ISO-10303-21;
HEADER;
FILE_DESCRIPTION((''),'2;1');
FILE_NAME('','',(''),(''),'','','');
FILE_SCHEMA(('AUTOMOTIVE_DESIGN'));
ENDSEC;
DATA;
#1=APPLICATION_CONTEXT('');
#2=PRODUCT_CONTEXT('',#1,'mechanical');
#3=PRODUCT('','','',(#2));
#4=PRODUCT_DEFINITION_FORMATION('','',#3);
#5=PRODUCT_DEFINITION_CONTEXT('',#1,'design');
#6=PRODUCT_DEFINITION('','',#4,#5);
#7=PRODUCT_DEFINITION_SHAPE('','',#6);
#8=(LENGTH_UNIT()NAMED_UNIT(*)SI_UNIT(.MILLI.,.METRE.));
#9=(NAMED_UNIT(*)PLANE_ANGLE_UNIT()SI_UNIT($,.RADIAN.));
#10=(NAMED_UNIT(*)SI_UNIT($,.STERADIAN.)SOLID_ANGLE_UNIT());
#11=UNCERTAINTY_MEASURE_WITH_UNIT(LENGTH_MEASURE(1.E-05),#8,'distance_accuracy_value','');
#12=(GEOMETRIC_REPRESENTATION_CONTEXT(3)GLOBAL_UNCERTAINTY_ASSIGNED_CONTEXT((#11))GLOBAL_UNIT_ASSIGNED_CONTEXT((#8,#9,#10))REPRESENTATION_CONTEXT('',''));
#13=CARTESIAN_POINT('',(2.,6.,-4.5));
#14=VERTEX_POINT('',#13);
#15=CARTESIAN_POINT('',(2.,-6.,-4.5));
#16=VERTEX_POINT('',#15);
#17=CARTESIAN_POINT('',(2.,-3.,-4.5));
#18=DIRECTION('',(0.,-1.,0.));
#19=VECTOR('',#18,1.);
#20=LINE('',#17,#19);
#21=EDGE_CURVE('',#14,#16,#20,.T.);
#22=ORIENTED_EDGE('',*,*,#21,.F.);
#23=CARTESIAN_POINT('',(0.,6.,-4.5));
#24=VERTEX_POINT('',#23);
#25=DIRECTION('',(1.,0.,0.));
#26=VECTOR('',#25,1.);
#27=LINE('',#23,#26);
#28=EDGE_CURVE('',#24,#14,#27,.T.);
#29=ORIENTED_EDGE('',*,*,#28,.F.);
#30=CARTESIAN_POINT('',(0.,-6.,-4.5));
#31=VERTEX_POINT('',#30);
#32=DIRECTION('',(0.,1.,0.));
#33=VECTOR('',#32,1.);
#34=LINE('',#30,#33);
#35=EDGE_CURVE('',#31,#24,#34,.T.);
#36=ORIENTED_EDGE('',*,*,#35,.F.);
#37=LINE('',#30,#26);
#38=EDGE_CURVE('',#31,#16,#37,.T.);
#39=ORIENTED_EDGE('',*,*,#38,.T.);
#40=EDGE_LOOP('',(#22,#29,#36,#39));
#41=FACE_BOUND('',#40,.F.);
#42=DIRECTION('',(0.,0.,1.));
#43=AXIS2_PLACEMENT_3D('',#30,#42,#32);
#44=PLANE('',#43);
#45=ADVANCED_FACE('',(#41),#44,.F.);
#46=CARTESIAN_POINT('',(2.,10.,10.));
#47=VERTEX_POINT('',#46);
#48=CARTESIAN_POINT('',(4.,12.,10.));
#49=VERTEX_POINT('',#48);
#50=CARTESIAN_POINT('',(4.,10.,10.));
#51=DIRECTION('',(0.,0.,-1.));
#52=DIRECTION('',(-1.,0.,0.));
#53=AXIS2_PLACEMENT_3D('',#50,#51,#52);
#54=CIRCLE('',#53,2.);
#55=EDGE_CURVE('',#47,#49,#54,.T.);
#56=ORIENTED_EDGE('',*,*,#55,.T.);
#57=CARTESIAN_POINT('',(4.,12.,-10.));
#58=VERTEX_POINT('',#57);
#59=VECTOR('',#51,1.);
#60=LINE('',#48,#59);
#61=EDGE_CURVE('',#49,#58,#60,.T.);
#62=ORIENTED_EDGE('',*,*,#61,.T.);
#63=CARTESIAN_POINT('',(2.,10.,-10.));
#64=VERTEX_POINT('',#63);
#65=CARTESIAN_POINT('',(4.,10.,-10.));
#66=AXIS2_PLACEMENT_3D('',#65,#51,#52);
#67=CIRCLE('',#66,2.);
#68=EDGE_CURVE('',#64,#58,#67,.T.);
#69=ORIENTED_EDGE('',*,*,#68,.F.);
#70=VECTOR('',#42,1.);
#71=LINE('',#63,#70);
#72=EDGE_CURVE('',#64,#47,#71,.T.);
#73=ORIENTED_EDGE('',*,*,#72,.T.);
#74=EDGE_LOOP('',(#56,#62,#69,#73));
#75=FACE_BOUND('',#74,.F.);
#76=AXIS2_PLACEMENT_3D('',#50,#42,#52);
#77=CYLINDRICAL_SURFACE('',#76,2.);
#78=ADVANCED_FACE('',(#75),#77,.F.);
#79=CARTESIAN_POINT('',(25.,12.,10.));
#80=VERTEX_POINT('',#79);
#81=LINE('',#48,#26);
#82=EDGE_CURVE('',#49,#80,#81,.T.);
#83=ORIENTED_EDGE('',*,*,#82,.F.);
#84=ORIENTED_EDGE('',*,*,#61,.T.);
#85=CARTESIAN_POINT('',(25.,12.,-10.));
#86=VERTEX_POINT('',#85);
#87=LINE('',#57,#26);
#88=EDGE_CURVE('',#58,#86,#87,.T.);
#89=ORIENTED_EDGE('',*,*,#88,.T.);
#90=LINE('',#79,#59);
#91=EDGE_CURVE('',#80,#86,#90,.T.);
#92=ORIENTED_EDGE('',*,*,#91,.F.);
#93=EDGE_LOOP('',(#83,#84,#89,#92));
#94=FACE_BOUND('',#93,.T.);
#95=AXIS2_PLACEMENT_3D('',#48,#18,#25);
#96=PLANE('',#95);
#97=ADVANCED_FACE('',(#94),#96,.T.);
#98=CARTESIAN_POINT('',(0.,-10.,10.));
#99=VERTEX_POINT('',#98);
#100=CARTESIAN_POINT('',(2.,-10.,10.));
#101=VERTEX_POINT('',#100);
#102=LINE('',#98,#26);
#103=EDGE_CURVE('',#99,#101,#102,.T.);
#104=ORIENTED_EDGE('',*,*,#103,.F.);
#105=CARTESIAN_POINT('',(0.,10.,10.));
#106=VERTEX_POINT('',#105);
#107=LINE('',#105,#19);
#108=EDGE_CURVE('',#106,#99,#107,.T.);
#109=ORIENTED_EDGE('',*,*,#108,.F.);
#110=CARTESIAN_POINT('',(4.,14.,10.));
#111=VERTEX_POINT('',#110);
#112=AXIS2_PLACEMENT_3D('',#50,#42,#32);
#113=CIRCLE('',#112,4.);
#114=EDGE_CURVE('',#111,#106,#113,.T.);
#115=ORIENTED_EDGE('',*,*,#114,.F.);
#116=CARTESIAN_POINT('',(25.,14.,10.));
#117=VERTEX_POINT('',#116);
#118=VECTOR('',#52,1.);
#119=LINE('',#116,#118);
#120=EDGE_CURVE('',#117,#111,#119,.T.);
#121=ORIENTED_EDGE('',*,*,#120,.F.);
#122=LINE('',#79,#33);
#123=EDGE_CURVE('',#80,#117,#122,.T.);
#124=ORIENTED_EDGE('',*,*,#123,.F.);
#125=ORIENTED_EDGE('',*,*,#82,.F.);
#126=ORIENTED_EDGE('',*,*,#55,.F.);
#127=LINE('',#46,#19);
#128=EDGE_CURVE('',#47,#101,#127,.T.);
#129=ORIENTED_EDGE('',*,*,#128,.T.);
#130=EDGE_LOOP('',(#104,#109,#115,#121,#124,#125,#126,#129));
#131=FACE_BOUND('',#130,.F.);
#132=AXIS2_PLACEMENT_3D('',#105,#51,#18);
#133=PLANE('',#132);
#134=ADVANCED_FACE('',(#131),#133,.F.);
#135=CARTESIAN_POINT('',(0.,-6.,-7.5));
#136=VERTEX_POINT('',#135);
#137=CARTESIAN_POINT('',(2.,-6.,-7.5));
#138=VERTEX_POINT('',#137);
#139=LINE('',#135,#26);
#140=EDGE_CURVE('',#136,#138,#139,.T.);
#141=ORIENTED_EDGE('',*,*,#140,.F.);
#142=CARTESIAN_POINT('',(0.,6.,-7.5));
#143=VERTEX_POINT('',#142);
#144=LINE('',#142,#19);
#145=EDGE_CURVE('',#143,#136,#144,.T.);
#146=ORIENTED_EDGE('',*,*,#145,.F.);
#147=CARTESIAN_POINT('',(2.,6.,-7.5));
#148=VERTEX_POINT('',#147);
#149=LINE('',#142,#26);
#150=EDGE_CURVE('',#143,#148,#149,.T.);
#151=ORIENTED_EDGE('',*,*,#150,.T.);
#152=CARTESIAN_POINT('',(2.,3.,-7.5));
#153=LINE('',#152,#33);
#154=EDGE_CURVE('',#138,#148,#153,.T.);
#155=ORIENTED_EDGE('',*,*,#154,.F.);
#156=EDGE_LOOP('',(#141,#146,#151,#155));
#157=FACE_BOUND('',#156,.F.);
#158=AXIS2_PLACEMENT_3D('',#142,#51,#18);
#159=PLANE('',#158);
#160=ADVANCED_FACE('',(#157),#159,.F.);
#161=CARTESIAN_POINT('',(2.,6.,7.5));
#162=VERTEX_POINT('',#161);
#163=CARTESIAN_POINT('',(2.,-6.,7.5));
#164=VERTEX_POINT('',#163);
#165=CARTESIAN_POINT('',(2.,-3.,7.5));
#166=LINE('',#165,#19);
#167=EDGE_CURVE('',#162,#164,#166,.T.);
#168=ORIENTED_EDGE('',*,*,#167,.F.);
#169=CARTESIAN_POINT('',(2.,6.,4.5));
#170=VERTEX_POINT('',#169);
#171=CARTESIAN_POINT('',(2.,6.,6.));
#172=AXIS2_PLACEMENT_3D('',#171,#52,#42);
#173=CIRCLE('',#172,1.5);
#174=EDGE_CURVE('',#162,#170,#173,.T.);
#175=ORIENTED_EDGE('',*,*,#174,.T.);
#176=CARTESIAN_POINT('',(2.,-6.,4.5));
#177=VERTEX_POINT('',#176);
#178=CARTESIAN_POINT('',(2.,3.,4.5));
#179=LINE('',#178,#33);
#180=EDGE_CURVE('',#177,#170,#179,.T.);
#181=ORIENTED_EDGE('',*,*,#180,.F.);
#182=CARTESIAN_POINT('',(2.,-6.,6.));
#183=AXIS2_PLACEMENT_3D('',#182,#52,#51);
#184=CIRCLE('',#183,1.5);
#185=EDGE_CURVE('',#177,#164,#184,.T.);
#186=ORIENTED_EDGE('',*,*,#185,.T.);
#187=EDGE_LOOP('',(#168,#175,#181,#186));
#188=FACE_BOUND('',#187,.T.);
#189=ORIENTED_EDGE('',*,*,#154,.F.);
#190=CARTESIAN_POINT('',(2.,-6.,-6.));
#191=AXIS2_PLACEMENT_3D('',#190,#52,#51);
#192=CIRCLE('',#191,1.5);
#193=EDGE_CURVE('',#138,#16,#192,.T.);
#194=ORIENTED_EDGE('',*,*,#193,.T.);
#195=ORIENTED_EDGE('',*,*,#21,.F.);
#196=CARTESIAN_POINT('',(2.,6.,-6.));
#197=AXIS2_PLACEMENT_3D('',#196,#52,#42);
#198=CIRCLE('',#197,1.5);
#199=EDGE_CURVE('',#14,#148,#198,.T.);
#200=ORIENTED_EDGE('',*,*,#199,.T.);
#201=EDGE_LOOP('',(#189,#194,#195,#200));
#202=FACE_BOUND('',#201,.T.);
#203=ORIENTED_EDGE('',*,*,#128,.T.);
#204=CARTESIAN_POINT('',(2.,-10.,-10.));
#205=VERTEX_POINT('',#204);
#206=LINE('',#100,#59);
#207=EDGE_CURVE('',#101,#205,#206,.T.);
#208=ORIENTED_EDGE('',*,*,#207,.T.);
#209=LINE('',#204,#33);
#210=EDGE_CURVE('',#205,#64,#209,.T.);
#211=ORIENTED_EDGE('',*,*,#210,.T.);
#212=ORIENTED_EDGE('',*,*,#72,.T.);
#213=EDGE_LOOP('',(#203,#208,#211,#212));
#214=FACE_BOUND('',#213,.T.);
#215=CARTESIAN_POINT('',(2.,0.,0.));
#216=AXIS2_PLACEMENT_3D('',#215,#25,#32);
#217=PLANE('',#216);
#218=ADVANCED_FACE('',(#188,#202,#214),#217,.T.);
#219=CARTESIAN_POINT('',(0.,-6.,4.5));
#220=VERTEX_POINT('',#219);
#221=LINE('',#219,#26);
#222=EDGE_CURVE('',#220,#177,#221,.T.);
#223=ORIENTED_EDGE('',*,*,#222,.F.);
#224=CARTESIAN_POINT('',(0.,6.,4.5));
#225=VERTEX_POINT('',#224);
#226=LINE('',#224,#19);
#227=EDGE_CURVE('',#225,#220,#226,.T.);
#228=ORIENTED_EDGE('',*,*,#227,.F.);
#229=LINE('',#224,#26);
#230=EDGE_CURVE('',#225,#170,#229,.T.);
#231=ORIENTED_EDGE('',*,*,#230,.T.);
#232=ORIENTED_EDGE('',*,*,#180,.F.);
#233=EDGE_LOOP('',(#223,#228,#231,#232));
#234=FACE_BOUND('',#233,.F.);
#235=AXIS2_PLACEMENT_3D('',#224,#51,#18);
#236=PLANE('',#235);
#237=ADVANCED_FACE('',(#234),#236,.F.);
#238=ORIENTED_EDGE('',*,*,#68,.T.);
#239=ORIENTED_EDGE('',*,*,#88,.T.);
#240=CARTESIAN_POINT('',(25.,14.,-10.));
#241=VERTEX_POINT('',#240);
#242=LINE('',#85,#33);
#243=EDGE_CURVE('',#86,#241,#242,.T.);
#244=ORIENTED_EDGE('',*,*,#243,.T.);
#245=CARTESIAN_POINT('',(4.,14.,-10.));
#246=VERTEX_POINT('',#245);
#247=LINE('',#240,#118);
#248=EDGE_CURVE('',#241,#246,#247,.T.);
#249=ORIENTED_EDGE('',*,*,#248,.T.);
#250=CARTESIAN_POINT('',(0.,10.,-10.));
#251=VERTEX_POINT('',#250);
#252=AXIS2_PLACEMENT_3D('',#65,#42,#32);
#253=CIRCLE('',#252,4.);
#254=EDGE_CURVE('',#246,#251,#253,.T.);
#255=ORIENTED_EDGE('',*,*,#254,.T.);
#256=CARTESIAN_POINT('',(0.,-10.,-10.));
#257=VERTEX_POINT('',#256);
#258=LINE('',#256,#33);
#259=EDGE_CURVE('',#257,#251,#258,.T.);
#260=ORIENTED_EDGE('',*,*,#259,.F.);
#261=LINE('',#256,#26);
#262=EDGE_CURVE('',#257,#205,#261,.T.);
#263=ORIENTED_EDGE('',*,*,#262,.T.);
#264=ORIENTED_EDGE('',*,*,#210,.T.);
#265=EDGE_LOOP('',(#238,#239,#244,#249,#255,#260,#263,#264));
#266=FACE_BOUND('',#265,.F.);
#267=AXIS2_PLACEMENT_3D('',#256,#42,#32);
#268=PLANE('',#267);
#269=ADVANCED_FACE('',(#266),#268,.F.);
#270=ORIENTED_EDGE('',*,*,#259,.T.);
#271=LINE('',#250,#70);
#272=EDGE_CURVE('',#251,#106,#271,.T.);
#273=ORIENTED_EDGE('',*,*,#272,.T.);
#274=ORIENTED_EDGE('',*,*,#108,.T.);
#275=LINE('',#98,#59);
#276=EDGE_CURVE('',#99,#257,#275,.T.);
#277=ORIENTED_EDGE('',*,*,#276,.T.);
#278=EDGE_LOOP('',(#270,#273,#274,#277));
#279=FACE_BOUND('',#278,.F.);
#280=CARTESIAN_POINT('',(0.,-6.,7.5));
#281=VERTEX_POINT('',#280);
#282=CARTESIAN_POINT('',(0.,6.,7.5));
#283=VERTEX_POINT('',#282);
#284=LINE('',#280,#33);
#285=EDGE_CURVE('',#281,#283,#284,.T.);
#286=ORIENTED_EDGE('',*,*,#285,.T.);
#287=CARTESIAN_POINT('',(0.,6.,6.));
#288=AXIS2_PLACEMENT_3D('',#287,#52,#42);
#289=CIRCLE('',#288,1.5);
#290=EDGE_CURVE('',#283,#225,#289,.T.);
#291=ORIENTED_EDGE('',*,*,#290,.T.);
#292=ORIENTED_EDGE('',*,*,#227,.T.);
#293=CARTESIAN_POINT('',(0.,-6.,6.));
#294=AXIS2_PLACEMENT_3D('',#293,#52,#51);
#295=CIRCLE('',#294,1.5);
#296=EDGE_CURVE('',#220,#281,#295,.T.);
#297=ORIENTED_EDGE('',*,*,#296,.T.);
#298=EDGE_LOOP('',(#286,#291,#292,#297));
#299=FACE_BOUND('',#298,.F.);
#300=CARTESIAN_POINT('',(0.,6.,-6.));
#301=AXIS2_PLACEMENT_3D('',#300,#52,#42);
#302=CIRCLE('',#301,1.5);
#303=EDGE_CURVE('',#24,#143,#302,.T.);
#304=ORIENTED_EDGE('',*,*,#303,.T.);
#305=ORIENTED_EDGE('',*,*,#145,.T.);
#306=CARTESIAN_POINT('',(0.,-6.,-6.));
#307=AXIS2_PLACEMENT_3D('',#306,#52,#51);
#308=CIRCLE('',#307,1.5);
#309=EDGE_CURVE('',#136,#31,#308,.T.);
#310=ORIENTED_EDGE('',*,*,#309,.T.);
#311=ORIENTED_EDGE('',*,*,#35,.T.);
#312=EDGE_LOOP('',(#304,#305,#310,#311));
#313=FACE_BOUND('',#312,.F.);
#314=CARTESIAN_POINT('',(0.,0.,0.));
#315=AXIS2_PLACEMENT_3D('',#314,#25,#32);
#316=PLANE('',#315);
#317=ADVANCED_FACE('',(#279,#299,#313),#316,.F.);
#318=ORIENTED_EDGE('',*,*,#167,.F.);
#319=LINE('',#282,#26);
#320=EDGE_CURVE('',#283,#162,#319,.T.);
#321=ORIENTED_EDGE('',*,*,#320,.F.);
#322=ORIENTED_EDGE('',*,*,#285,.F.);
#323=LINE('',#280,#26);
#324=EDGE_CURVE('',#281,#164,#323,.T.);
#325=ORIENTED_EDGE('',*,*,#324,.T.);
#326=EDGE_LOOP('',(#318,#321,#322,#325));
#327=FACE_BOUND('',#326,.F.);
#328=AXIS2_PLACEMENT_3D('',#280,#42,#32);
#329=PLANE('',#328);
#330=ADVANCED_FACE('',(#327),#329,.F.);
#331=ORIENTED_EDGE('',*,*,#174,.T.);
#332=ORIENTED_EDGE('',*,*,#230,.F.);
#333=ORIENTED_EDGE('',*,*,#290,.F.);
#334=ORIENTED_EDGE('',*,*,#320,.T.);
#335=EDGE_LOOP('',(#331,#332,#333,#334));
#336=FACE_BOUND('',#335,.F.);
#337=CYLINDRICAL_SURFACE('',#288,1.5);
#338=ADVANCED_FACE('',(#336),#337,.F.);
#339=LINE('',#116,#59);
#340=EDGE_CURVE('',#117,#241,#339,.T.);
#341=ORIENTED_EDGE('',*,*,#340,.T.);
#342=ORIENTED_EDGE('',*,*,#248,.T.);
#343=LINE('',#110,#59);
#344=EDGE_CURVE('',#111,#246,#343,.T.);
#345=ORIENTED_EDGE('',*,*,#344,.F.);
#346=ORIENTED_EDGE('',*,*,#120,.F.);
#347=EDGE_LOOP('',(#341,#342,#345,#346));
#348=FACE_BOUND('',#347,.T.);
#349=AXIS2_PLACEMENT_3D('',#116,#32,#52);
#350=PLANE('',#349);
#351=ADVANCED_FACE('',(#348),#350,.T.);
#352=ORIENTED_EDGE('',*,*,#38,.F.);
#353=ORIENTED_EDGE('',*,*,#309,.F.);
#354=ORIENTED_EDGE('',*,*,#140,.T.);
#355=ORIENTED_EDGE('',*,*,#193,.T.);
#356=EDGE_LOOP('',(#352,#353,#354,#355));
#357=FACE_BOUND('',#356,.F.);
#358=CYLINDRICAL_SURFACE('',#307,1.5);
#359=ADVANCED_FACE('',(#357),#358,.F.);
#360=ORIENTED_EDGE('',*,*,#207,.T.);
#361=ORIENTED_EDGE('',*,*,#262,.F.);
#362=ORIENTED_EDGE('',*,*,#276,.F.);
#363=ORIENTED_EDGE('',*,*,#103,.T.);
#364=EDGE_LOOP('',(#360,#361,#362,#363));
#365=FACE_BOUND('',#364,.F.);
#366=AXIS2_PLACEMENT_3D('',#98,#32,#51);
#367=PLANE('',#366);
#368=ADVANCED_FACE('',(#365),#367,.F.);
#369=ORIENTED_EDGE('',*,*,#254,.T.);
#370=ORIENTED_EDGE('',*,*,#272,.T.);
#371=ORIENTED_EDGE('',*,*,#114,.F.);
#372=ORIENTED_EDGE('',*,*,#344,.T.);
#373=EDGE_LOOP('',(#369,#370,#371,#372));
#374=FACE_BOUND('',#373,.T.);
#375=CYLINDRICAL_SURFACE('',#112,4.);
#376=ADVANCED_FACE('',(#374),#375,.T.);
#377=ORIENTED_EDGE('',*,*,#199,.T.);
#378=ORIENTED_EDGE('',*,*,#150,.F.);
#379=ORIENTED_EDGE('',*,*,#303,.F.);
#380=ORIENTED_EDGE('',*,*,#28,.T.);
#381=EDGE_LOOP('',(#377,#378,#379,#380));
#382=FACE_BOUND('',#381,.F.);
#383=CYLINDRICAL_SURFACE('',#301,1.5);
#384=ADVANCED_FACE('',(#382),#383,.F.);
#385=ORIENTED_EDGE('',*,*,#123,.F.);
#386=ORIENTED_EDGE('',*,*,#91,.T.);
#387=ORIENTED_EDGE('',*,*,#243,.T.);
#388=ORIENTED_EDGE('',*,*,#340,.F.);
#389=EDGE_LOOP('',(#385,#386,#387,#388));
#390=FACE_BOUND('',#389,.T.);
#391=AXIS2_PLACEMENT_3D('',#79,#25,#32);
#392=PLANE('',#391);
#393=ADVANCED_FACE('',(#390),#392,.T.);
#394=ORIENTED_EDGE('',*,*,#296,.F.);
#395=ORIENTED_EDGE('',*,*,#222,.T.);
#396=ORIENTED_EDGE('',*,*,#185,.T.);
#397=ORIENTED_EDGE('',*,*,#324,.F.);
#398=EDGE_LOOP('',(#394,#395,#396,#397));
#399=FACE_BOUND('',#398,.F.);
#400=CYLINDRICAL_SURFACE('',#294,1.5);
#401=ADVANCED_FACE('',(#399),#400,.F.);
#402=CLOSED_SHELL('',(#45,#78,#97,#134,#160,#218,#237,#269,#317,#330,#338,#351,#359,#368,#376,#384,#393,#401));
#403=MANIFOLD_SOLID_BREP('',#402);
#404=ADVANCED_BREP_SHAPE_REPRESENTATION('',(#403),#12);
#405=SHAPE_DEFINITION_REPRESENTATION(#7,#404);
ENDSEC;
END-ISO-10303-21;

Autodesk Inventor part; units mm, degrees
ref_plane "YZ Plane" through (0, 0, 0) normal (1, 0, 0) x (0, 1, 0)
ref_plane "XZ Plane" through (0, 0, 0) normal (0, 1, 0) x (-1, 0, 0)
ref_plane "XY Plane" through (0, 0, 0) normal (0, 0, 1) x (1, 0, 0)
sketch "スケッチ1" plane through (0, 0, 0) normal (1, 0, 0) x (0, 1, 0)
  line L0 (-10, -10) -> (10, -10)
  line L1 (10, -10) -> (10, 10)
  line L2 (10, 10) -> (-10, 10)
  line L3 (-10, 10) -> (-10, -10)
  line L4 (-10, -10) -> (10, 10) construction
  line L5 (10, -10) -> (-10, 10) construction
  point P0 (0, 0)
  dimension "d0" = 20
  dimension "d1" = 20
extrude "プレート1" add sketch "スケッチ1" along normal blind 2
sketch "スケッチ2" plane through (4, 12, 10) normal (0, 1, 0) x (-1, 0, 0)
  line L0 (0, -20) -> (0, 0)
  line L1 (0, 0) -> (-21, 0)
  line L2 (-21, 0) -> (-21, -20)
  line L3 (-21, -20) -> (0, -20)
edge flange "フランジ1" height 25 angle 90 thickness 2 bend radius 2 thickness toward (0, 1, 0) relief straight relief width 2 relief depth 1 edges at (2, 10, 0) wall of the first edge with corners at (4, 12, -10) (4, 12, 10) (25, 12, 10) (25, 12, -10)
bend "曲げ1"
corner "コーナー1"
sketch "スケッチ3" plane through (0, 0, 0) normal (-1, 0, 0) x (0, 0, 1)
  line L0 (-7.5, 6) -> (-7.5, -6)
  arc A0 (-7.5, -6) -> (-4.5, -6) centre (-6, -6) ccw
  line L1 (-4.5, -6) -> (-4.5, 6)
  arc A1 (-4.5, 6) -> (-7.5, 6) centre (-6, 6) ccw
  line L2 (4.5, 6) -> (4.5, -6)
  arc A2 (4.5, -6) -> (7.5, -6) centre (6, -6) ccw
  line L3 (7.5, -6) -> (7.5, 6)
  arc A3 (7.5, 6) -> (4.5, 6) centre (6, 6) ccw
  line L4 (-10, -10) -> (-10, 10) projected
  line L5 (10, 10) -> (10, -10) projected
  line L6 (10, -10) -> (-10, -10) projected
  line L7 (-10, 10) -> (10, 10) projected
  point P0 (0, 0)
  dimension "d13" = 4
  dimension "d14" = 4
  dimension "d15" = 1.5
  dimension "d16" = 1.5
  dimension "d17" = 4
  dimension "d18" = 4
  dimension "d19" = 4
  dimension "d20" = 4
extrude "押し出し1" cut sketch "スケッチ3" against normal blind 10 contours A1 L1 A0 L0 | A3 L3 A2 L2
equation "\"d2\" = Thickness"
equation "\"d3\" = BendReliefWidth"
equation "\"d4\" = BendReliefDepth"
equation "\"d5\" = MinimumRemnant"
equation "\"d6\" = TransitionRadius"
equation "\"d9\" = BendRadius"
equation "\"d10\" = CornerReliefSize"
equation "\"d11\" = GapSize"
equation "\"d12\" = JacobiRadiusSize"
equation "\"BendRadius\" = Thickness"
equation "\"BendReliefWidth\" = Thickness"
equation "\"BendReliefDepth\" = 0.5 * Thickness"
equation "\"CornerReliefSize\" = 4 * Thickness"
equation "\"MinimumRemnant\" = 2 * Thickness"
equation "\"TransitionRadius\" = BendRadius"
equation "\"JacobiRadiusSize\" = Thickness"
equation "\"GapSize\" = Thickness"
equation "\"Thickness\" = 2"
properties part number "trackballL"
